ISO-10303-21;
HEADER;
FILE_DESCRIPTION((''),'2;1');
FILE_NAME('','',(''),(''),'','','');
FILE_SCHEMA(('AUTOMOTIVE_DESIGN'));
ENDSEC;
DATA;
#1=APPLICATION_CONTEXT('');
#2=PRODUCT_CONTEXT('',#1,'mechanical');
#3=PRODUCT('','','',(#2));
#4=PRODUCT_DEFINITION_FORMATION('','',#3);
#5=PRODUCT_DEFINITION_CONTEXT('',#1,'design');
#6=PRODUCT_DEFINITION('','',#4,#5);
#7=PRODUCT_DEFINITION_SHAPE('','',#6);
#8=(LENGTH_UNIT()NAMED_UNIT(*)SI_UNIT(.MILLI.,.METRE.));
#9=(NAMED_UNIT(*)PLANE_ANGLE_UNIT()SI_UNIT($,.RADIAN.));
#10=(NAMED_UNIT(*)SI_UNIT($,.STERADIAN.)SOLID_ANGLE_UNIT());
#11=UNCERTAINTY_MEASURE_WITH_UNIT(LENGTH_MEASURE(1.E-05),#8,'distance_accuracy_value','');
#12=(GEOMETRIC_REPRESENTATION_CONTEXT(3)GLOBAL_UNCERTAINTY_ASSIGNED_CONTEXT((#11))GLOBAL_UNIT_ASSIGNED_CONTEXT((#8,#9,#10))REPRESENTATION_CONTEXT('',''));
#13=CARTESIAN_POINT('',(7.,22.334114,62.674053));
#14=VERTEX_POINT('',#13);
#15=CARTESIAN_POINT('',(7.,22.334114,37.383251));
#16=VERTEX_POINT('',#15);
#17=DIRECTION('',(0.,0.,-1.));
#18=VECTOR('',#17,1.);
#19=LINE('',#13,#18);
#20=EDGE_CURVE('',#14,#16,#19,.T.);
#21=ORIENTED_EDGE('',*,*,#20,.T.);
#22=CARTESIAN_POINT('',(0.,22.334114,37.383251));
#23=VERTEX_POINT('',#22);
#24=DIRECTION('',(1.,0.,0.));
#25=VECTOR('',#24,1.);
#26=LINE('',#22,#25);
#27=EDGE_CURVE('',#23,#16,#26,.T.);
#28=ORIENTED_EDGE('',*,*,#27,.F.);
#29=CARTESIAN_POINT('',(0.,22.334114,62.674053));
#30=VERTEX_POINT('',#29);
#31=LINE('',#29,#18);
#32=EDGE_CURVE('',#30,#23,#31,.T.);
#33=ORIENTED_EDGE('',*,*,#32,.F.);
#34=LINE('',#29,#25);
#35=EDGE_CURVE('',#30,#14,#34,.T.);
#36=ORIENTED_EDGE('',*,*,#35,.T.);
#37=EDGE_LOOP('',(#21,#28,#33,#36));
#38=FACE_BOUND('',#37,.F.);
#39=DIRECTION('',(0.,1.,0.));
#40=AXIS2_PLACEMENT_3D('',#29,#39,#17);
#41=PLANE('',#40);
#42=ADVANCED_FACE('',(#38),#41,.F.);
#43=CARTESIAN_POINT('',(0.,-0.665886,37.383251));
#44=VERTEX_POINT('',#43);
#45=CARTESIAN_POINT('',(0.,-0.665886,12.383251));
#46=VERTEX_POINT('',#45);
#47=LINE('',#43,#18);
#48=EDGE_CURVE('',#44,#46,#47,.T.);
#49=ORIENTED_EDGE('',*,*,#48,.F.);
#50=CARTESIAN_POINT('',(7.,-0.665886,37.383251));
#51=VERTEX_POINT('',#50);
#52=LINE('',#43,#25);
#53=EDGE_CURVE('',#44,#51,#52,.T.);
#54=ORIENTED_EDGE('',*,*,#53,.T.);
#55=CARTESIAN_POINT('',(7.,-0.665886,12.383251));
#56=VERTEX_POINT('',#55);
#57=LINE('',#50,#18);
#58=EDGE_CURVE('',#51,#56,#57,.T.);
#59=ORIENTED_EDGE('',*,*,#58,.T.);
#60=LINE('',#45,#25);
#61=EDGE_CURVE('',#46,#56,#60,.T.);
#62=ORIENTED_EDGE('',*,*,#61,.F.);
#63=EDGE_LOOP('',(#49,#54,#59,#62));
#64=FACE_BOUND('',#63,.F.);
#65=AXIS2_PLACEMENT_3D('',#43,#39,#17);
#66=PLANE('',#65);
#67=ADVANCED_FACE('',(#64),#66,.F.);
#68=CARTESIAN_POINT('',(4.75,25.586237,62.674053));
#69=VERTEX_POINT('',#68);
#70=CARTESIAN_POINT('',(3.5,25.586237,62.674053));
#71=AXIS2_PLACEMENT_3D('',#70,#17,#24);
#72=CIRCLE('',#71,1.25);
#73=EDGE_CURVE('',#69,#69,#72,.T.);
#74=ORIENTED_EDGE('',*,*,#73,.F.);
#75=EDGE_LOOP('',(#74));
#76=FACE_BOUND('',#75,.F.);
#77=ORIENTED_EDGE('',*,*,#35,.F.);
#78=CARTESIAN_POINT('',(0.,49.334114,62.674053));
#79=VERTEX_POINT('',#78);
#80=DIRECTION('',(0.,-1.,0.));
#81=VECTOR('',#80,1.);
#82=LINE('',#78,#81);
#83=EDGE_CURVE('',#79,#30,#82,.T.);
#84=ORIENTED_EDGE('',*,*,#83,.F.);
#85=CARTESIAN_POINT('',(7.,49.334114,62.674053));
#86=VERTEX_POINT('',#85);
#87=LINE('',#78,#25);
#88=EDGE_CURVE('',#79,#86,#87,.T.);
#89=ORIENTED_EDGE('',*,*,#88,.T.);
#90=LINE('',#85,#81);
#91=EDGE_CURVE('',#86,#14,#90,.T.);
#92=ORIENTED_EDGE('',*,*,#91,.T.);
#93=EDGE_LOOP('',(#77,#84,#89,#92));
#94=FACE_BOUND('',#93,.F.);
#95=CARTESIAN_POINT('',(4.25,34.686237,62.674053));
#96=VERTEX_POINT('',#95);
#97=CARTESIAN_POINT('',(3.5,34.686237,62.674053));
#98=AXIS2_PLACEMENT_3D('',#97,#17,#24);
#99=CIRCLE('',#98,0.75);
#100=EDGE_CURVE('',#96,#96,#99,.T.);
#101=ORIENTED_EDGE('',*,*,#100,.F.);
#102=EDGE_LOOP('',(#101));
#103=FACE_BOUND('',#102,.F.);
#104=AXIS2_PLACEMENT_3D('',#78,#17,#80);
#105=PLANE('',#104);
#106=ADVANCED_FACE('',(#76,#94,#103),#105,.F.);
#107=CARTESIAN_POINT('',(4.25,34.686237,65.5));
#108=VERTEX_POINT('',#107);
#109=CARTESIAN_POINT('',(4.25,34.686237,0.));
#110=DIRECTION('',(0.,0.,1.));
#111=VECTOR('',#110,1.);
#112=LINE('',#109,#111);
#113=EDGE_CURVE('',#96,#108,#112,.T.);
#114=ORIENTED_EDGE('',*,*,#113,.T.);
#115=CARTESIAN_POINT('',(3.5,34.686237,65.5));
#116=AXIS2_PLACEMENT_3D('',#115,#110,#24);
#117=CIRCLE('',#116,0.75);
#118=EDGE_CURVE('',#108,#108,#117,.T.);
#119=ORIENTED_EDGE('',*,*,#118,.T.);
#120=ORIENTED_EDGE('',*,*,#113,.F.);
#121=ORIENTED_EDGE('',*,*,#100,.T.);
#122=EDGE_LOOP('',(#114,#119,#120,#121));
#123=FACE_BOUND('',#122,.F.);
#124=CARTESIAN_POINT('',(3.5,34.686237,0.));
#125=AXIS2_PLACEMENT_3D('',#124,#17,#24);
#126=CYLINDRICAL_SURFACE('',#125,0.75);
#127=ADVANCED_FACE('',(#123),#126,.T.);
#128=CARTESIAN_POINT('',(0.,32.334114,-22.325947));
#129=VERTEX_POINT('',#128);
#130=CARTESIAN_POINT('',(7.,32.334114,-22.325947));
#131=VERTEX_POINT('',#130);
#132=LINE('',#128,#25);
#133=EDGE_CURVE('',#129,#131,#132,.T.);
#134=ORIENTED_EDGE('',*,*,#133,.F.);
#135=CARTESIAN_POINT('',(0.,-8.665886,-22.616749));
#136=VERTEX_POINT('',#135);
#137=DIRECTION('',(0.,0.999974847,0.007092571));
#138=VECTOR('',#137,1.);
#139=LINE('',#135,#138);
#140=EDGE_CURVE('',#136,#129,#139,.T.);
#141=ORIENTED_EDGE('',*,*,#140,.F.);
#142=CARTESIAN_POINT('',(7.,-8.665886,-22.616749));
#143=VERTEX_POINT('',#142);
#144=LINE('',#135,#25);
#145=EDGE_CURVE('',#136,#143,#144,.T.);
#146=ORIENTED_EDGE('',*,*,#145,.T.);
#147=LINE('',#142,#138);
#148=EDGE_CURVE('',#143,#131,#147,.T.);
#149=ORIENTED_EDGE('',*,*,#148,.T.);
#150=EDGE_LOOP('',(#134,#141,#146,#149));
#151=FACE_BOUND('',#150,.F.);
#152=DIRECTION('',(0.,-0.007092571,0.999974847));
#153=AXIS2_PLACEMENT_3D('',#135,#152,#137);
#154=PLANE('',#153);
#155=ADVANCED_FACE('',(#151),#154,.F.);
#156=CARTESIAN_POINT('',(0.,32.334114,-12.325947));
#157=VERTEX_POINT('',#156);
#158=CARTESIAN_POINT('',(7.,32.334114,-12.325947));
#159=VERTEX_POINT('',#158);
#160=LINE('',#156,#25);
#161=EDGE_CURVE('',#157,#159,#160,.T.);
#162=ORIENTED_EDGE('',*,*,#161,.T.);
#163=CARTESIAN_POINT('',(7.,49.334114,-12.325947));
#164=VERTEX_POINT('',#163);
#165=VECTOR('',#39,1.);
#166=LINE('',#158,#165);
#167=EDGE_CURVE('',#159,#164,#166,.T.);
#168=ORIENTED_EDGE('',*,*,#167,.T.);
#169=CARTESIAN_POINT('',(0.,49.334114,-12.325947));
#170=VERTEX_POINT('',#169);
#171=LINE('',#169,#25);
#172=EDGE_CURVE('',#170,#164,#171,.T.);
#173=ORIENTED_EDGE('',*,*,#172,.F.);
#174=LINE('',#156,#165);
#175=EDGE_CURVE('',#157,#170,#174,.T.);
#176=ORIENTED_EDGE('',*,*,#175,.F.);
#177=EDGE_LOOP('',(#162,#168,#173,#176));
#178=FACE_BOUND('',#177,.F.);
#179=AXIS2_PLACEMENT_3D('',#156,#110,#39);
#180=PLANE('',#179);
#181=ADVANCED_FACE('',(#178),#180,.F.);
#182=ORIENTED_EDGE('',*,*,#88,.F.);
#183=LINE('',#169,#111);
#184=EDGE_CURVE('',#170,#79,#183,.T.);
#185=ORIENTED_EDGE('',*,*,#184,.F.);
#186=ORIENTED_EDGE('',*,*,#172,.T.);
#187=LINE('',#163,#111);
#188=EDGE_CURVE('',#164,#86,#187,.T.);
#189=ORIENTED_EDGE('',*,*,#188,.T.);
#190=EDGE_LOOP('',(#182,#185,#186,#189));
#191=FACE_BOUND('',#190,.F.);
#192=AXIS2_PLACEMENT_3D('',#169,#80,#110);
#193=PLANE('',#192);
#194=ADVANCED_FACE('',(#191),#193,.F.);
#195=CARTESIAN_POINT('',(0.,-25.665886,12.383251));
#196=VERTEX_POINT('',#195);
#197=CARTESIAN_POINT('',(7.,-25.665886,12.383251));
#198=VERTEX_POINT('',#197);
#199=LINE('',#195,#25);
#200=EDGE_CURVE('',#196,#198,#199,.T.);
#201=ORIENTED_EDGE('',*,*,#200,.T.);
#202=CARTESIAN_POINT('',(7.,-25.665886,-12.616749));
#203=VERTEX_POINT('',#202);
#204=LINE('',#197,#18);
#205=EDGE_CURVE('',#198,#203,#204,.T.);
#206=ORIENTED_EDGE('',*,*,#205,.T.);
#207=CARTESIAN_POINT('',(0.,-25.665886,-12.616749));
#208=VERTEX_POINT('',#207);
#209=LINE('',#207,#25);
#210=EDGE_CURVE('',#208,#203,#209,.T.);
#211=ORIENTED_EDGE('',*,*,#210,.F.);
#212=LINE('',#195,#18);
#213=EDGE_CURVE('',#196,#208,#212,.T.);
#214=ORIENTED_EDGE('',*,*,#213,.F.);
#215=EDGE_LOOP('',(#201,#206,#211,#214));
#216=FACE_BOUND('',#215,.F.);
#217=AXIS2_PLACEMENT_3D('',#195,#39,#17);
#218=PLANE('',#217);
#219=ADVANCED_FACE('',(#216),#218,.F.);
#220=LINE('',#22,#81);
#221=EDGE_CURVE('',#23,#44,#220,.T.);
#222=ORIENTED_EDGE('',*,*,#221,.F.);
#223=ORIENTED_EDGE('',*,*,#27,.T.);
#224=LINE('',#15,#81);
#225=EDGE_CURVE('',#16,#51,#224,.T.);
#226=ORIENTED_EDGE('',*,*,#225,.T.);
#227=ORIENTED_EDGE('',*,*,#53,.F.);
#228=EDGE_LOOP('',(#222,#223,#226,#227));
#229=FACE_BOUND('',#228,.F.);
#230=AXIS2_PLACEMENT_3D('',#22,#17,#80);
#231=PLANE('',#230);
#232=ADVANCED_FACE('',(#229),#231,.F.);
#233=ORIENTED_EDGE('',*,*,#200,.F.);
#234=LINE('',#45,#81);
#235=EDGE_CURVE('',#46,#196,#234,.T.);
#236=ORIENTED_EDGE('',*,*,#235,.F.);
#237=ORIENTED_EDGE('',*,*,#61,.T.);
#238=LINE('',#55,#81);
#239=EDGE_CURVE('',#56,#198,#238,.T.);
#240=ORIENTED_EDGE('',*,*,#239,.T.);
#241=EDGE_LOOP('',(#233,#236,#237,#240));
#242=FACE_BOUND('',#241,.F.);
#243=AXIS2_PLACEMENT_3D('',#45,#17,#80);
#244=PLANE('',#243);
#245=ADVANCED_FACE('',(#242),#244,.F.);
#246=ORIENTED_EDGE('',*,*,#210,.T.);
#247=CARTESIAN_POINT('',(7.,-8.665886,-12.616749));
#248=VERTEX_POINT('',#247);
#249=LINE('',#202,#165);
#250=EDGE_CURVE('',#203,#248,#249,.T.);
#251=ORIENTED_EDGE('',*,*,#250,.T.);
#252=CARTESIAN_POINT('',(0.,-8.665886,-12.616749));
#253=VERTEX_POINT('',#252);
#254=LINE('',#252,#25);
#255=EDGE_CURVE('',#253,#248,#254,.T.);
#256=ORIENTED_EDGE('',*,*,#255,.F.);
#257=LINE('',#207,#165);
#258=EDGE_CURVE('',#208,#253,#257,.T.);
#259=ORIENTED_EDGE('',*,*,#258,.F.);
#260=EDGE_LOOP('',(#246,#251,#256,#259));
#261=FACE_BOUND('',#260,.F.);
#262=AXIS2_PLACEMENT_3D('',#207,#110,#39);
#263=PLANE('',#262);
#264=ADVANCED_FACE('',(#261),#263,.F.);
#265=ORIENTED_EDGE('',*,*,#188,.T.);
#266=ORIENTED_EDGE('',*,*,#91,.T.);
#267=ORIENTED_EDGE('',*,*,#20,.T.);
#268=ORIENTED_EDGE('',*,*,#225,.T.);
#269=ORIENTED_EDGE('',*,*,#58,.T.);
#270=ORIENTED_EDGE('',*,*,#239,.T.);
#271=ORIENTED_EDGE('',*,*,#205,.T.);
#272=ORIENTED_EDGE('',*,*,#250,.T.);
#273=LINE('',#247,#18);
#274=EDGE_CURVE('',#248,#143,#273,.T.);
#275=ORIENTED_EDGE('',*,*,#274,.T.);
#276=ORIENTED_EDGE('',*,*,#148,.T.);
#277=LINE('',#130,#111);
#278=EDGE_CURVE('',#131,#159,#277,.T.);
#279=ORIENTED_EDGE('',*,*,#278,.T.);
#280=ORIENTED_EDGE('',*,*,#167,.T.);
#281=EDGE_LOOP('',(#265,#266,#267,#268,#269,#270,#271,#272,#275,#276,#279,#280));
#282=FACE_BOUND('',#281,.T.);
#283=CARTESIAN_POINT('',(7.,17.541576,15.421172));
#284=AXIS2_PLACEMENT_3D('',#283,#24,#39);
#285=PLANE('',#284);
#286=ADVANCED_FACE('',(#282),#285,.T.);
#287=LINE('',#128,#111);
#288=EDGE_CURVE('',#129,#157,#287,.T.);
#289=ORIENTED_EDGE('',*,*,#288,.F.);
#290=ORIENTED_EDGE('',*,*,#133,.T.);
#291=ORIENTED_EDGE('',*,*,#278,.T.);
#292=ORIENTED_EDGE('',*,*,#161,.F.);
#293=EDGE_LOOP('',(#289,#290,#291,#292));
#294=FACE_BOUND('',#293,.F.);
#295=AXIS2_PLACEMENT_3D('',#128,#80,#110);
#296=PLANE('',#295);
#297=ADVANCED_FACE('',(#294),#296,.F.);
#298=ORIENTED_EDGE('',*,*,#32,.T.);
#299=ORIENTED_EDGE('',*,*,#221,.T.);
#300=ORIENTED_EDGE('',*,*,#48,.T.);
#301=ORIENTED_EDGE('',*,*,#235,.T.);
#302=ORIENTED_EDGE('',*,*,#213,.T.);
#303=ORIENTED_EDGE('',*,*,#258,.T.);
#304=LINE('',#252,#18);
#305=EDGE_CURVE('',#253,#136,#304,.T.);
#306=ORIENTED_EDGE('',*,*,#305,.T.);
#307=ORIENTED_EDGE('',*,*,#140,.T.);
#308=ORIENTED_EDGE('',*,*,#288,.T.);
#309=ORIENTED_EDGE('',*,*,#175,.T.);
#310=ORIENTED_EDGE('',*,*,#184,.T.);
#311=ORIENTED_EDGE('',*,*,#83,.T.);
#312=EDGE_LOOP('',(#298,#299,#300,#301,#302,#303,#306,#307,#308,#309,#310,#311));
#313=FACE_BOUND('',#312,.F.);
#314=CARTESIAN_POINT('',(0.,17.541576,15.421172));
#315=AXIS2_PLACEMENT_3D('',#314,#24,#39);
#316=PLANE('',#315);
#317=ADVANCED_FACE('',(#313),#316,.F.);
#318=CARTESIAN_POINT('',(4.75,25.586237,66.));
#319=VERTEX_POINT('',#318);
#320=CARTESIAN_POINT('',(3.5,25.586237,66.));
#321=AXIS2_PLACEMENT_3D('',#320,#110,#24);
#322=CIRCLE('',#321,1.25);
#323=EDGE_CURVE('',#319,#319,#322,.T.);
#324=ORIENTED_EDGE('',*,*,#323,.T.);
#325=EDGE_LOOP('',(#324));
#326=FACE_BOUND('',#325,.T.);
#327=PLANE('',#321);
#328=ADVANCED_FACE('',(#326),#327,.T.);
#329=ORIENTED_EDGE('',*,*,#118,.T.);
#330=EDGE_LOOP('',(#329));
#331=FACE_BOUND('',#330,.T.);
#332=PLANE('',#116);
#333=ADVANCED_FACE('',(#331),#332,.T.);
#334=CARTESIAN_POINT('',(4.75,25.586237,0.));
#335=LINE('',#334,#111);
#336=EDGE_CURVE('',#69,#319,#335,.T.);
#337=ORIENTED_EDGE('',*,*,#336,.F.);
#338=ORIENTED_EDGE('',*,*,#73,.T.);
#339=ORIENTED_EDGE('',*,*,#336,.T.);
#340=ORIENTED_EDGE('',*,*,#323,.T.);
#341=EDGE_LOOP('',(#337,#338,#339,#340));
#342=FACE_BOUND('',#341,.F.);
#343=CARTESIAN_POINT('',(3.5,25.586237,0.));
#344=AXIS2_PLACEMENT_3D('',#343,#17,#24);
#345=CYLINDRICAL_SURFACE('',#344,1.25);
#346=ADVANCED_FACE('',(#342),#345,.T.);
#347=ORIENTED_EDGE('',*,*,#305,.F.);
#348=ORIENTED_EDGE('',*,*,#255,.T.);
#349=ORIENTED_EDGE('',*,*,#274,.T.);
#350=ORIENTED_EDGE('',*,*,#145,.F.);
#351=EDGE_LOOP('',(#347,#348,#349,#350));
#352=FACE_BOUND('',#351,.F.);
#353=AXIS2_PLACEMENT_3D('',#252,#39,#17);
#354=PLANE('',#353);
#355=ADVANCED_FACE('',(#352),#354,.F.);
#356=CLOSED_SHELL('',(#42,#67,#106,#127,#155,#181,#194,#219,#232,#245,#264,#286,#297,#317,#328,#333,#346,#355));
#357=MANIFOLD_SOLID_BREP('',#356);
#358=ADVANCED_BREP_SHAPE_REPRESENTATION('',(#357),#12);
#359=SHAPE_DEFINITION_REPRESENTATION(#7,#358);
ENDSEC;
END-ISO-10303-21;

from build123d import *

# Parameters (mm, degrees)
F1_DEPTH = 7
F2_R     = 1.25
F3_DEPTH = 25
F2_R_2   = 0.75
F4_DEPTH = 25
F5_DEPTH = 66
F6_DEPTH = 65.5


# Not quite as in the source:
# - a feature names something its author has since deleted; it is built from what else it names


with BuildPart() as f1:
    # F0 (on Right) → F1 (new body)
    with BuildSketch(Plane.YZ):
        Polygon((-25.6658861851, 12.3832505633), (-25.6658861851, -12.6167494367), (-8.6658861851, -12.6167494367), (-8.6658861851, -22.6167494367), (32.3341138149, -22.3259466936), (32.3341138149, -12.3259466936), (49.3341138149, -12.3259466936), (49.3341138149, 62.6740533064), (26.7576448203, 62.6740533064), (22.3341138149, 62.6740533064), (22.3341138149, 37.3832505633), (-0.6658861851, 37.3832505633), (-0.6658861851, 12.3832505633), align=None)
    extrude(amount=F1_DEPTH)



with BuildPart() as f3:
    # F2 (on Top) → F3 (new body)
    with BuildSketch(Plane.XY):
        with Locations((3.5, 25.5862374604)):
            Circle(F2_R)
    extrude(amount=F3_DEPTH)

    # F2 (on Top) → F4 (join)
    with BuildSketch(Plane.XY):
        with Locations((3.5, 25.5862374604)):
            Circle(F2_R)
    extrude(amount=F4_DEPTH)


with BuildPart() as f3b:
    # F2 (on Top) → F3, piece 2 (new body)
    with BuildSketch(Plane.XY):
        with Locations((3.5, 34.6862374604)):
            Circle(F2_R_2)
    extrude(amount=F3_DEPTH)

    # F2 (on Top) → F4, piece 2 (join)
    with BuildSketch(Plane.XY):
        with Locations((3.5, 34.6862374604)):
            Circle(F2_R_2)
    extrude(amount=F4_DEPTH)


with BuildPart() as f1_1:
    add(f1.part)

    add(f3.part)  # F5 merges F3
    # F2 (on Top) → F5 (join)
    with BuildSketch(Plane.XY):
        with Locations((3.5, 25.5862374604)):
            Circle(F2_R)
    extrude(amount=F5_DEPTH)


    add(f3b.part)  # F6 merges F3b
    # F2 (on Top) → F6 (join)
    with BuildSketch(Plane.XY):
        with Locations((3.5, 34.6862374604)):
            Circle(F2_R_2)
    extrude(amount=F6_DEPTH)


solid = f1_1.part
